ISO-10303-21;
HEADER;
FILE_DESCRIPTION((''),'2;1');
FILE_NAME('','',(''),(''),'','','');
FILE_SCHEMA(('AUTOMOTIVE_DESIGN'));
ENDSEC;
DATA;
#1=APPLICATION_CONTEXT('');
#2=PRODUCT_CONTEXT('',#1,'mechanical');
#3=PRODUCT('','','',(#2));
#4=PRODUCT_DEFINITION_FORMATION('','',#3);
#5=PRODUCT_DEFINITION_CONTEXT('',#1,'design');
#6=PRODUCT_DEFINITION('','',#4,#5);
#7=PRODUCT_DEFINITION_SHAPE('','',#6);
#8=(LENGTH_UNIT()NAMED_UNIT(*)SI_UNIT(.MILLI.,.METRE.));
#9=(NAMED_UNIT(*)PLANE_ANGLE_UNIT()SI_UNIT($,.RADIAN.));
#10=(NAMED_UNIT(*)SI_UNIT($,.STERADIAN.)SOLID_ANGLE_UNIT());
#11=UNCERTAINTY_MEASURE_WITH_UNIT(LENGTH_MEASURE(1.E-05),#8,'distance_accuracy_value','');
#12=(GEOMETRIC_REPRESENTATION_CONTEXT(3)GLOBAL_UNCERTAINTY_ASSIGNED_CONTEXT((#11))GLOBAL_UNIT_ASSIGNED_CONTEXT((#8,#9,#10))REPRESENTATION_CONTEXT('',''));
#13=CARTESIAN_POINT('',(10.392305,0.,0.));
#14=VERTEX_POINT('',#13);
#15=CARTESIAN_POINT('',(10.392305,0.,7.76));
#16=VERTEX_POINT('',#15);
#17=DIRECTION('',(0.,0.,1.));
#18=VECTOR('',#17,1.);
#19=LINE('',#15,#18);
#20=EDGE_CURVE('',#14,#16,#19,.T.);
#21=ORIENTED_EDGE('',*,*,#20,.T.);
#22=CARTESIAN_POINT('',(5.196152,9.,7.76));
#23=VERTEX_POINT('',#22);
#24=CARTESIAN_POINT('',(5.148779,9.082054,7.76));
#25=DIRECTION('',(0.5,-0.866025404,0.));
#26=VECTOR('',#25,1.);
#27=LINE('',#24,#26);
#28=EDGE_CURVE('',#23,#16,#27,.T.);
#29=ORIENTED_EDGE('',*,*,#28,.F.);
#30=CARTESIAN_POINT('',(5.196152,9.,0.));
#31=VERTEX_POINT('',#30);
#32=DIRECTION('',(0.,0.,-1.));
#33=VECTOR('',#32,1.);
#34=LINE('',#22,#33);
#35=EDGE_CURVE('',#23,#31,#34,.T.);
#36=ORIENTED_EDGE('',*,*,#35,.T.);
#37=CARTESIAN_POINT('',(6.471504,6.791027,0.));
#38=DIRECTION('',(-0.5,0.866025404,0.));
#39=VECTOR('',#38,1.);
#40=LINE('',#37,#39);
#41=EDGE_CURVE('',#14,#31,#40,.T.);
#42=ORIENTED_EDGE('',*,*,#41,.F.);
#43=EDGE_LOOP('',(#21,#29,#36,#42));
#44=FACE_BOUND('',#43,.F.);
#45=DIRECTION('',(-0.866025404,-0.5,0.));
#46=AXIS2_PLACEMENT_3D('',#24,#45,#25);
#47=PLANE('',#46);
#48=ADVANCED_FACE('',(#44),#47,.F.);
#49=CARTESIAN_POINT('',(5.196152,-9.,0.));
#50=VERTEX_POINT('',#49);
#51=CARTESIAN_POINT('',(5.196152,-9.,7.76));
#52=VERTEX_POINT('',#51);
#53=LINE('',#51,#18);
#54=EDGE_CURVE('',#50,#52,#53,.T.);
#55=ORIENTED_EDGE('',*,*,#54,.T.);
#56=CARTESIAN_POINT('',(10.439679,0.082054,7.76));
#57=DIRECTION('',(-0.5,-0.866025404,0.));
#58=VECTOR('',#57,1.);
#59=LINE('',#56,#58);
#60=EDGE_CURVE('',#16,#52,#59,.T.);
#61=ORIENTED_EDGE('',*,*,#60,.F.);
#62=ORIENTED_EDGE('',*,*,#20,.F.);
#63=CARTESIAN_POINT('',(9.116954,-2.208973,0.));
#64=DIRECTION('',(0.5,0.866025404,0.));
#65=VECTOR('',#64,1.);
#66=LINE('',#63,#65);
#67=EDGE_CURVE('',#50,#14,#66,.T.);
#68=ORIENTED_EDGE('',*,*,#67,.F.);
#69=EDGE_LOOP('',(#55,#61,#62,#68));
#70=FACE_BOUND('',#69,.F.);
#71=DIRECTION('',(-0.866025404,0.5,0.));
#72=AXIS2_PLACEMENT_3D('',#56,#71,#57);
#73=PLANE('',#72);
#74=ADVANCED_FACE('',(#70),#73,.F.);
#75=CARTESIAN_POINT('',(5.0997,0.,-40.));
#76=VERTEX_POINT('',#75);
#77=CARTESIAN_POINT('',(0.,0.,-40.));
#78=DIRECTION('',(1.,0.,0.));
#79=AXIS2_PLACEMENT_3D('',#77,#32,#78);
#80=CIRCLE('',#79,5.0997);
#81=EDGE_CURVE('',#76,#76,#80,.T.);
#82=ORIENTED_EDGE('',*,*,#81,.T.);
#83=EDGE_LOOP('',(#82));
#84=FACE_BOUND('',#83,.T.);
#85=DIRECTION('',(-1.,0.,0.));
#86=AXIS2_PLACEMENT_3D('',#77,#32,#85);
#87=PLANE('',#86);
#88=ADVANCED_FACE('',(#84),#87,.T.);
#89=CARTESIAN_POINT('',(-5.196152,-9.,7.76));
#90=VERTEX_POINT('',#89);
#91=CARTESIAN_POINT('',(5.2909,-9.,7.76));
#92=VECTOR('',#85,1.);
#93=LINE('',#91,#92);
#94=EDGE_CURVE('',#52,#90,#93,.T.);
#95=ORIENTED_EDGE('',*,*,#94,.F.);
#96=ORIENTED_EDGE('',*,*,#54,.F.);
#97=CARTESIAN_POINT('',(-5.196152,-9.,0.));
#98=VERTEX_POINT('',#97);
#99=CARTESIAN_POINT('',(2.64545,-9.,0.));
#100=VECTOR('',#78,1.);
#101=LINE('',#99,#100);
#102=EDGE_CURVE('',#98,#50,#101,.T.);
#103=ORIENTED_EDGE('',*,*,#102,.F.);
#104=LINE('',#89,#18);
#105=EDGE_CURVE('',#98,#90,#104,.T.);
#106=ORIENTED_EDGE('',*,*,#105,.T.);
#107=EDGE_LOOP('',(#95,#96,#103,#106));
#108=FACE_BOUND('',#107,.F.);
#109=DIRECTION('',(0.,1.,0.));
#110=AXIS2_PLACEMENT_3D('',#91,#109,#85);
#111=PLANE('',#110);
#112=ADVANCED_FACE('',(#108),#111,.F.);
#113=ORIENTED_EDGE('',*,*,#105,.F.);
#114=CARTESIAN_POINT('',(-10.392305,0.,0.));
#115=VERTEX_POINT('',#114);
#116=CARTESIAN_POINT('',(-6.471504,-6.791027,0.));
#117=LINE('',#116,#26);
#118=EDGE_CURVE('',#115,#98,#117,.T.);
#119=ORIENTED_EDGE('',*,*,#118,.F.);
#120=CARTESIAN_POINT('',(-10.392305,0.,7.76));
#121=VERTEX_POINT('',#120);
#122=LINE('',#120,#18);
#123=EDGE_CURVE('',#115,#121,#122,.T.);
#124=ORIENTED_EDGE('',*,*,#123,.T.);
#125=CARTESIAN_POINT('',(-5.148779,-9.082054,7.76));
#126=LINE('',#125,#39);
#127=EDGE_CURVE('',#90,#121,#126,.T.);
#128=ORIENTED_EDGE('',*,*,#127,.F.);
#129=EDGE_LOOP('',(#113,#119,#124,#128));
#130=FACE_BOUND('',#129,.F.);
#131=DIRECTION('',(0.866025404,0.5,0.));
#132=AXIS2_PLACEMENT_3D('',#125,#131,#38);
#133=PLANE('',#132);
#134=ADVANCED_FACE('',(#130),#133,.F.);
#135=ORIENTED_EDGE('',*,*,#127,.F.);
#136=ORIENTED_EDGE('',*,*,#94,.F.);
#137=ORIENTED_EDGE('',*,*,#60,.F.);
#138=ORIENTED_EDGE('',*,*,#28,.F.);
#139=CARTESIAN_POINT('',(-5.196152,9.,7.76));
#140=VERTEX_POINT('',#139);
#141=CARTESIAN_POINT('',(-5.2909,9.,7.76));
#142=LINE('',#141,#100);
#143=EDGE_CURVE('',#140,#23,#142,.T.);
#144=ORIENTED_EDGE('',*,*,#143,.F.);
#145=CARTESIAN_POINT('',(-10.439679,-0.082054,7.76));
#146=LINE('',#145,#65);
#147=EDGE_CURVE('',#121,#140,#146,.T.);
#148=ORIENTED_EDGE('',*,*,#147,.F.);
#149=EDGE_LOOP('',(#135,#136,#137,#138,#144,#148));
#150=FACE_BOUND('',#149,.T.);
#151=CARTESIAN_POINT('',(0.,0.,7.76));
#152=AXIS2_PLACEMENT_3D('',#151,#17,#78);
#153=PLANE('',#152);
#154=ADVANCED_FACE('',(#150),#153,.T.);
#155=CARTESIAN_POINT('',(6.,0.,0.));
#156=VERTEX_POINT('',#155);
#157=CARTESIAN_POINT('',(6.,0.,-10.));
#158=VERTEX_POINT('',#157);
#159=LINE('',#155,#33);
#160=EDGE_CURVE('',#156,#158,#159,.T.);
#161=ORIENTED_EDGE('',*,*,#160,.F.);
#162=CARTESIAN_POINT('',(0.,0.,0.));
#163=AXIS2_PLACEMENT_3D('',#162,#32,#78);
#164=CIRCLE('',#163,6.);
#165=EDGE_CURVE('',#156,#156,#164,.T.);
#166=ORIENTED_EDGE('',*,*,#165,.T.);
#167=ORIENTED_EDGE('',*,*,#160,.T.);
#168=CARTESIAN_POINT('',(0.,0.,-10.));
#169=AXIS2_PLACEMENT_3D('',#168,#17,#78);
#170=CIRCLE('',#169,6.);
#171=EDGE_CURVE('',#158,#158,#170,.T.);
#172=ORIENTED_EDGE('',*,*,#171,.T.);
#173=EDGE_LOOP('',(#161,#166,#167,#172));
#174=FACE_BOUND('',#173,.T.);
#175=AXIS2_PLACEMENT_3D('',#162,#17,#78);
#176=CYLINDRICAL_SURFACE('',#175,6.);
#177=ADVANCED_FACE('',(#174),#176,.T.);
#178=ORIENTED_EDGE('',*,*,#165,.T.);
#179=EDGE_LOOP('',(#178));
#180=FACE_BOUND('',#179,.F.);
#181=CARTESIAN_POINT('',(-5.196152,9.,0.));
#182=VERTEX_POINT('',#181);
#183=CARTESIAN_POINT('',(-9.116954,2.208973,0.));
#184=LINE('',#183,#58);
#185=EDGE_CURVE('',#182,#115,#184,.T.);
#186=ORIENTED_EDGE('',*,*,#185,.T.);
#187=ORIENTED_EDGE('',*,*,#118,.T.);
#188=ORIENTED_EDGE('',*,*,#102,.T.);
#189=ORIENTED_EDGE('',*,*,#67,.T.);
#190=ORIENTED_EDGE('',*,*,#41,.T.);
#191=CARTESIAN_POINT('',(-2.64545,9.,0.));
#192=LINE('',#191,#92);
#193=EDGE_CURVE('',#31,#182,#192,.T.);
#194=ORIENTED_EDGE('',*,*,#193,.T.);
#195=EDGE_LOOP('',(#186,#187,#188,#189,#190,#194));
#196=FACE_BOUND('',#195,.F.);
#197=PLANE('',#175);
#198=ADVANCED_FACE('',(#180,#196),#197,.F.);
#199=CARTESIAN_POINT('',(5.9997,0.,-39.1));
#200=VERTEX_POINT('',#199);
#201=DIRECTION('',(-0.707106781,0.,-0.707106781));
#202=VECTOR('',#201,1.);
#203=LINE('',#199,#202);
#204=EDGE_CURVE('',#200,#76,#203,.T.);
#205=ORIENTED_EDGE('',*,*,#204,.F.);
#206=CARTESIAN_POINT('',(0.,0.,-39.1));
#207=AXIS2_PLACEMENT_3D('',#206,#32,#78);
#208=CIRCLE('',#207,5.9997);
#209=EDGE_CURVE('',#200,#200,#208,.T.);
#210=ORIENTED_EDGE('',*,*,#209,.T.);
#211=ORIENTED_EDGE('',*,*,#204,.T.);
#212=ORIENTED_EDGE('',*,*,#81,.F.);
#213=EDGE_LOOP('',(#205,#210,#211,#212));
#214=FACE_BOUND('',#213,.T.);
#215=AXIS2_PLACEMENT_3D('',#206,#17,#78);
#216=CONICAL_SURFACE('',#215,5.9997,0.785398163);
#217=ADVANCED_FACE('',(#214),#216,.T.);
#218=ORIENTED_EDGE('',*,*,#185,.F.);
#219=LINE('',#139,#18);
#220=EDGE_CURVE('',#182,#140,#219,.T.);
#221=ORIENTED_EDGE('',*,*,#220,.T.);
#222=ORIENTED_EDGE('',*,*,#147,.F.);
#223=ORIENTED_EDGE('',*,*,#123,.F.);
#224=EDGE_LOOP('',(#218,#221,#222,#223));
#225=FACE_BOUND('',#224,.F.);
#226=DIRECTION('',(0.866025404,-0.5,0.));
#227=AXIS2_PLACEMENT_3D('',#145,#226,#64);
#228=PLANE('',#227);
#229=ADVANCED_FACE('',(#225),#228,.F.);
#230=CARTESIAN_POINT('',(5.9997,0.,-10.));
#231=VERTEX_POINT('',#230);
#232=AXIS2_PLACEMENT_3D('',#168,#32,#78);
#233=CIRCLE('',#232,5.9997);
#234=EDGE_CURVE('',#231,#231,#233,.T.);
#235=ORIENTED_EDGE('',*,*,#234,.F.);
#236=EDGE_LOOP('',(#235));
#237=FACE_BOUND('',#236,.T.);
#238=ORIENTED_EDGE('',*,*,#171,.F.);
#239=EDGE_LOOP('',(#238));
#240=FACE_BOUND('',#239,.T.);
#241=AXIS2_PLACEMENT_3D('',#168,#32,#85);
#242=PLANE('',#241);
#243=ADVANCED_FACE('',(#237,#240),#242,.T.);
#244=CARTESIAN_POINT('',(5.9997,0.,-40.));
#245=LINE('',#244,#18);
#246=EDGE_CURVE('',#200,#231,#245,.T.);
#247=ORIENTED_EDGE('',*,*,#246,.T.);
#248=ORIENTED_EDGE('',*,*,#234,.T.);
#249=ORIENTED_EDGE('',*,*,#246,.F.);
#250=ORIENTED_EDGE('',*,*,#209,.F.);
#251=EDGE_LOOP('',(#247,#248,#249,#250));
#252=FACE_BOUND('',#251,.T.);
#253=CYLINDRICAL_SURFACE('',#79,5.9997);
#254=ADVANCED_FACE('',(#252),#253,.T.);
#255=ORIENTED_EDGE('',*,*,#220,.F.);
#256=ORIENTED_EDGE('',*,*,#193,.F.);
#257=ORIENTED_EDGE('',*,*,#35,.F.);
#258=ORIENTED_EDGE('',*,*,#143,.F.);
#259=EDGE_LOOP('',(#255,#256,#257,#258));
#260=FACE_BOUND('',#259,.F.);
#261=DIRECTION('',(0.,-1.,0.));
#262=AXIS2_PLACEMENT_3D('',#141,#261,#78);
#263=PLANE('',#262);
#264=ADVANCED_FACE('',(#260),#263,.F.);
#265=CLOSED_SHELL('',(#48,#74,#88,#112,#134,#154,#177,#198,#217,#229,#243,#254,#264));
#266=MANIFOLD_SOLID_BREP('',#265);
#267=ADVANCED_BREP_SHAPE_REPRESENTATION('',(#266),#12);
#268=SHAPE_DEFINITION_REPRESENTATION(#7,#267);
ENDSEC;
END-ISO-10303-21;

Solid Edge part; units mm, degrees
sketch "Sketch1" plane through (0, 0, 0) normal (0, 0, 1) x (1, 0, 0)
  circle A0 centre (0, 0) radius 10.44
  dimension "D1" = 20.88
extrude "Protrusion1" add sketch "Sketch1" along normal blind 7.76
sketch "Sketch2" plane through (0, 0, 0) normal (0, 0, -1) x (1, 0, 0)
  circle A0 centre (0, 0) radius 6
extrude "Protrusion2" add sketch "Sketch2" along normal blind 40
sketch "Sketch3" plane through (0, 0, -40) normal (0, 0, -1) x (1, 0, 0)
  circle A0 centre (0, 0) radius 5.9997
extrude "Cutout1" cut sketch "Sketch3" against normal blind 30 flip side to cut
chamfer "Chamfer_1" distance 0.9 angle 45 1 edges at (-5.9997, 0, -40)
sketch "Sketch4" plane through (0, 0, 7.76) normal (0, 0, 1) x (1, 0, 0)
  line L0 (-5.2909, 9) -> (5.2909, 9)
  dimension "D1" = 18
extrude "Cutout2" cut sketch "Sketch4" against normal up to next material side at (0, 9.05, 7.76)
pattern_circular "Pattern1" count 6 over 360 about axis through (0, 0, 7.76) along (0, 0, 1) of "Cutout2"
properties part number "24102480"
